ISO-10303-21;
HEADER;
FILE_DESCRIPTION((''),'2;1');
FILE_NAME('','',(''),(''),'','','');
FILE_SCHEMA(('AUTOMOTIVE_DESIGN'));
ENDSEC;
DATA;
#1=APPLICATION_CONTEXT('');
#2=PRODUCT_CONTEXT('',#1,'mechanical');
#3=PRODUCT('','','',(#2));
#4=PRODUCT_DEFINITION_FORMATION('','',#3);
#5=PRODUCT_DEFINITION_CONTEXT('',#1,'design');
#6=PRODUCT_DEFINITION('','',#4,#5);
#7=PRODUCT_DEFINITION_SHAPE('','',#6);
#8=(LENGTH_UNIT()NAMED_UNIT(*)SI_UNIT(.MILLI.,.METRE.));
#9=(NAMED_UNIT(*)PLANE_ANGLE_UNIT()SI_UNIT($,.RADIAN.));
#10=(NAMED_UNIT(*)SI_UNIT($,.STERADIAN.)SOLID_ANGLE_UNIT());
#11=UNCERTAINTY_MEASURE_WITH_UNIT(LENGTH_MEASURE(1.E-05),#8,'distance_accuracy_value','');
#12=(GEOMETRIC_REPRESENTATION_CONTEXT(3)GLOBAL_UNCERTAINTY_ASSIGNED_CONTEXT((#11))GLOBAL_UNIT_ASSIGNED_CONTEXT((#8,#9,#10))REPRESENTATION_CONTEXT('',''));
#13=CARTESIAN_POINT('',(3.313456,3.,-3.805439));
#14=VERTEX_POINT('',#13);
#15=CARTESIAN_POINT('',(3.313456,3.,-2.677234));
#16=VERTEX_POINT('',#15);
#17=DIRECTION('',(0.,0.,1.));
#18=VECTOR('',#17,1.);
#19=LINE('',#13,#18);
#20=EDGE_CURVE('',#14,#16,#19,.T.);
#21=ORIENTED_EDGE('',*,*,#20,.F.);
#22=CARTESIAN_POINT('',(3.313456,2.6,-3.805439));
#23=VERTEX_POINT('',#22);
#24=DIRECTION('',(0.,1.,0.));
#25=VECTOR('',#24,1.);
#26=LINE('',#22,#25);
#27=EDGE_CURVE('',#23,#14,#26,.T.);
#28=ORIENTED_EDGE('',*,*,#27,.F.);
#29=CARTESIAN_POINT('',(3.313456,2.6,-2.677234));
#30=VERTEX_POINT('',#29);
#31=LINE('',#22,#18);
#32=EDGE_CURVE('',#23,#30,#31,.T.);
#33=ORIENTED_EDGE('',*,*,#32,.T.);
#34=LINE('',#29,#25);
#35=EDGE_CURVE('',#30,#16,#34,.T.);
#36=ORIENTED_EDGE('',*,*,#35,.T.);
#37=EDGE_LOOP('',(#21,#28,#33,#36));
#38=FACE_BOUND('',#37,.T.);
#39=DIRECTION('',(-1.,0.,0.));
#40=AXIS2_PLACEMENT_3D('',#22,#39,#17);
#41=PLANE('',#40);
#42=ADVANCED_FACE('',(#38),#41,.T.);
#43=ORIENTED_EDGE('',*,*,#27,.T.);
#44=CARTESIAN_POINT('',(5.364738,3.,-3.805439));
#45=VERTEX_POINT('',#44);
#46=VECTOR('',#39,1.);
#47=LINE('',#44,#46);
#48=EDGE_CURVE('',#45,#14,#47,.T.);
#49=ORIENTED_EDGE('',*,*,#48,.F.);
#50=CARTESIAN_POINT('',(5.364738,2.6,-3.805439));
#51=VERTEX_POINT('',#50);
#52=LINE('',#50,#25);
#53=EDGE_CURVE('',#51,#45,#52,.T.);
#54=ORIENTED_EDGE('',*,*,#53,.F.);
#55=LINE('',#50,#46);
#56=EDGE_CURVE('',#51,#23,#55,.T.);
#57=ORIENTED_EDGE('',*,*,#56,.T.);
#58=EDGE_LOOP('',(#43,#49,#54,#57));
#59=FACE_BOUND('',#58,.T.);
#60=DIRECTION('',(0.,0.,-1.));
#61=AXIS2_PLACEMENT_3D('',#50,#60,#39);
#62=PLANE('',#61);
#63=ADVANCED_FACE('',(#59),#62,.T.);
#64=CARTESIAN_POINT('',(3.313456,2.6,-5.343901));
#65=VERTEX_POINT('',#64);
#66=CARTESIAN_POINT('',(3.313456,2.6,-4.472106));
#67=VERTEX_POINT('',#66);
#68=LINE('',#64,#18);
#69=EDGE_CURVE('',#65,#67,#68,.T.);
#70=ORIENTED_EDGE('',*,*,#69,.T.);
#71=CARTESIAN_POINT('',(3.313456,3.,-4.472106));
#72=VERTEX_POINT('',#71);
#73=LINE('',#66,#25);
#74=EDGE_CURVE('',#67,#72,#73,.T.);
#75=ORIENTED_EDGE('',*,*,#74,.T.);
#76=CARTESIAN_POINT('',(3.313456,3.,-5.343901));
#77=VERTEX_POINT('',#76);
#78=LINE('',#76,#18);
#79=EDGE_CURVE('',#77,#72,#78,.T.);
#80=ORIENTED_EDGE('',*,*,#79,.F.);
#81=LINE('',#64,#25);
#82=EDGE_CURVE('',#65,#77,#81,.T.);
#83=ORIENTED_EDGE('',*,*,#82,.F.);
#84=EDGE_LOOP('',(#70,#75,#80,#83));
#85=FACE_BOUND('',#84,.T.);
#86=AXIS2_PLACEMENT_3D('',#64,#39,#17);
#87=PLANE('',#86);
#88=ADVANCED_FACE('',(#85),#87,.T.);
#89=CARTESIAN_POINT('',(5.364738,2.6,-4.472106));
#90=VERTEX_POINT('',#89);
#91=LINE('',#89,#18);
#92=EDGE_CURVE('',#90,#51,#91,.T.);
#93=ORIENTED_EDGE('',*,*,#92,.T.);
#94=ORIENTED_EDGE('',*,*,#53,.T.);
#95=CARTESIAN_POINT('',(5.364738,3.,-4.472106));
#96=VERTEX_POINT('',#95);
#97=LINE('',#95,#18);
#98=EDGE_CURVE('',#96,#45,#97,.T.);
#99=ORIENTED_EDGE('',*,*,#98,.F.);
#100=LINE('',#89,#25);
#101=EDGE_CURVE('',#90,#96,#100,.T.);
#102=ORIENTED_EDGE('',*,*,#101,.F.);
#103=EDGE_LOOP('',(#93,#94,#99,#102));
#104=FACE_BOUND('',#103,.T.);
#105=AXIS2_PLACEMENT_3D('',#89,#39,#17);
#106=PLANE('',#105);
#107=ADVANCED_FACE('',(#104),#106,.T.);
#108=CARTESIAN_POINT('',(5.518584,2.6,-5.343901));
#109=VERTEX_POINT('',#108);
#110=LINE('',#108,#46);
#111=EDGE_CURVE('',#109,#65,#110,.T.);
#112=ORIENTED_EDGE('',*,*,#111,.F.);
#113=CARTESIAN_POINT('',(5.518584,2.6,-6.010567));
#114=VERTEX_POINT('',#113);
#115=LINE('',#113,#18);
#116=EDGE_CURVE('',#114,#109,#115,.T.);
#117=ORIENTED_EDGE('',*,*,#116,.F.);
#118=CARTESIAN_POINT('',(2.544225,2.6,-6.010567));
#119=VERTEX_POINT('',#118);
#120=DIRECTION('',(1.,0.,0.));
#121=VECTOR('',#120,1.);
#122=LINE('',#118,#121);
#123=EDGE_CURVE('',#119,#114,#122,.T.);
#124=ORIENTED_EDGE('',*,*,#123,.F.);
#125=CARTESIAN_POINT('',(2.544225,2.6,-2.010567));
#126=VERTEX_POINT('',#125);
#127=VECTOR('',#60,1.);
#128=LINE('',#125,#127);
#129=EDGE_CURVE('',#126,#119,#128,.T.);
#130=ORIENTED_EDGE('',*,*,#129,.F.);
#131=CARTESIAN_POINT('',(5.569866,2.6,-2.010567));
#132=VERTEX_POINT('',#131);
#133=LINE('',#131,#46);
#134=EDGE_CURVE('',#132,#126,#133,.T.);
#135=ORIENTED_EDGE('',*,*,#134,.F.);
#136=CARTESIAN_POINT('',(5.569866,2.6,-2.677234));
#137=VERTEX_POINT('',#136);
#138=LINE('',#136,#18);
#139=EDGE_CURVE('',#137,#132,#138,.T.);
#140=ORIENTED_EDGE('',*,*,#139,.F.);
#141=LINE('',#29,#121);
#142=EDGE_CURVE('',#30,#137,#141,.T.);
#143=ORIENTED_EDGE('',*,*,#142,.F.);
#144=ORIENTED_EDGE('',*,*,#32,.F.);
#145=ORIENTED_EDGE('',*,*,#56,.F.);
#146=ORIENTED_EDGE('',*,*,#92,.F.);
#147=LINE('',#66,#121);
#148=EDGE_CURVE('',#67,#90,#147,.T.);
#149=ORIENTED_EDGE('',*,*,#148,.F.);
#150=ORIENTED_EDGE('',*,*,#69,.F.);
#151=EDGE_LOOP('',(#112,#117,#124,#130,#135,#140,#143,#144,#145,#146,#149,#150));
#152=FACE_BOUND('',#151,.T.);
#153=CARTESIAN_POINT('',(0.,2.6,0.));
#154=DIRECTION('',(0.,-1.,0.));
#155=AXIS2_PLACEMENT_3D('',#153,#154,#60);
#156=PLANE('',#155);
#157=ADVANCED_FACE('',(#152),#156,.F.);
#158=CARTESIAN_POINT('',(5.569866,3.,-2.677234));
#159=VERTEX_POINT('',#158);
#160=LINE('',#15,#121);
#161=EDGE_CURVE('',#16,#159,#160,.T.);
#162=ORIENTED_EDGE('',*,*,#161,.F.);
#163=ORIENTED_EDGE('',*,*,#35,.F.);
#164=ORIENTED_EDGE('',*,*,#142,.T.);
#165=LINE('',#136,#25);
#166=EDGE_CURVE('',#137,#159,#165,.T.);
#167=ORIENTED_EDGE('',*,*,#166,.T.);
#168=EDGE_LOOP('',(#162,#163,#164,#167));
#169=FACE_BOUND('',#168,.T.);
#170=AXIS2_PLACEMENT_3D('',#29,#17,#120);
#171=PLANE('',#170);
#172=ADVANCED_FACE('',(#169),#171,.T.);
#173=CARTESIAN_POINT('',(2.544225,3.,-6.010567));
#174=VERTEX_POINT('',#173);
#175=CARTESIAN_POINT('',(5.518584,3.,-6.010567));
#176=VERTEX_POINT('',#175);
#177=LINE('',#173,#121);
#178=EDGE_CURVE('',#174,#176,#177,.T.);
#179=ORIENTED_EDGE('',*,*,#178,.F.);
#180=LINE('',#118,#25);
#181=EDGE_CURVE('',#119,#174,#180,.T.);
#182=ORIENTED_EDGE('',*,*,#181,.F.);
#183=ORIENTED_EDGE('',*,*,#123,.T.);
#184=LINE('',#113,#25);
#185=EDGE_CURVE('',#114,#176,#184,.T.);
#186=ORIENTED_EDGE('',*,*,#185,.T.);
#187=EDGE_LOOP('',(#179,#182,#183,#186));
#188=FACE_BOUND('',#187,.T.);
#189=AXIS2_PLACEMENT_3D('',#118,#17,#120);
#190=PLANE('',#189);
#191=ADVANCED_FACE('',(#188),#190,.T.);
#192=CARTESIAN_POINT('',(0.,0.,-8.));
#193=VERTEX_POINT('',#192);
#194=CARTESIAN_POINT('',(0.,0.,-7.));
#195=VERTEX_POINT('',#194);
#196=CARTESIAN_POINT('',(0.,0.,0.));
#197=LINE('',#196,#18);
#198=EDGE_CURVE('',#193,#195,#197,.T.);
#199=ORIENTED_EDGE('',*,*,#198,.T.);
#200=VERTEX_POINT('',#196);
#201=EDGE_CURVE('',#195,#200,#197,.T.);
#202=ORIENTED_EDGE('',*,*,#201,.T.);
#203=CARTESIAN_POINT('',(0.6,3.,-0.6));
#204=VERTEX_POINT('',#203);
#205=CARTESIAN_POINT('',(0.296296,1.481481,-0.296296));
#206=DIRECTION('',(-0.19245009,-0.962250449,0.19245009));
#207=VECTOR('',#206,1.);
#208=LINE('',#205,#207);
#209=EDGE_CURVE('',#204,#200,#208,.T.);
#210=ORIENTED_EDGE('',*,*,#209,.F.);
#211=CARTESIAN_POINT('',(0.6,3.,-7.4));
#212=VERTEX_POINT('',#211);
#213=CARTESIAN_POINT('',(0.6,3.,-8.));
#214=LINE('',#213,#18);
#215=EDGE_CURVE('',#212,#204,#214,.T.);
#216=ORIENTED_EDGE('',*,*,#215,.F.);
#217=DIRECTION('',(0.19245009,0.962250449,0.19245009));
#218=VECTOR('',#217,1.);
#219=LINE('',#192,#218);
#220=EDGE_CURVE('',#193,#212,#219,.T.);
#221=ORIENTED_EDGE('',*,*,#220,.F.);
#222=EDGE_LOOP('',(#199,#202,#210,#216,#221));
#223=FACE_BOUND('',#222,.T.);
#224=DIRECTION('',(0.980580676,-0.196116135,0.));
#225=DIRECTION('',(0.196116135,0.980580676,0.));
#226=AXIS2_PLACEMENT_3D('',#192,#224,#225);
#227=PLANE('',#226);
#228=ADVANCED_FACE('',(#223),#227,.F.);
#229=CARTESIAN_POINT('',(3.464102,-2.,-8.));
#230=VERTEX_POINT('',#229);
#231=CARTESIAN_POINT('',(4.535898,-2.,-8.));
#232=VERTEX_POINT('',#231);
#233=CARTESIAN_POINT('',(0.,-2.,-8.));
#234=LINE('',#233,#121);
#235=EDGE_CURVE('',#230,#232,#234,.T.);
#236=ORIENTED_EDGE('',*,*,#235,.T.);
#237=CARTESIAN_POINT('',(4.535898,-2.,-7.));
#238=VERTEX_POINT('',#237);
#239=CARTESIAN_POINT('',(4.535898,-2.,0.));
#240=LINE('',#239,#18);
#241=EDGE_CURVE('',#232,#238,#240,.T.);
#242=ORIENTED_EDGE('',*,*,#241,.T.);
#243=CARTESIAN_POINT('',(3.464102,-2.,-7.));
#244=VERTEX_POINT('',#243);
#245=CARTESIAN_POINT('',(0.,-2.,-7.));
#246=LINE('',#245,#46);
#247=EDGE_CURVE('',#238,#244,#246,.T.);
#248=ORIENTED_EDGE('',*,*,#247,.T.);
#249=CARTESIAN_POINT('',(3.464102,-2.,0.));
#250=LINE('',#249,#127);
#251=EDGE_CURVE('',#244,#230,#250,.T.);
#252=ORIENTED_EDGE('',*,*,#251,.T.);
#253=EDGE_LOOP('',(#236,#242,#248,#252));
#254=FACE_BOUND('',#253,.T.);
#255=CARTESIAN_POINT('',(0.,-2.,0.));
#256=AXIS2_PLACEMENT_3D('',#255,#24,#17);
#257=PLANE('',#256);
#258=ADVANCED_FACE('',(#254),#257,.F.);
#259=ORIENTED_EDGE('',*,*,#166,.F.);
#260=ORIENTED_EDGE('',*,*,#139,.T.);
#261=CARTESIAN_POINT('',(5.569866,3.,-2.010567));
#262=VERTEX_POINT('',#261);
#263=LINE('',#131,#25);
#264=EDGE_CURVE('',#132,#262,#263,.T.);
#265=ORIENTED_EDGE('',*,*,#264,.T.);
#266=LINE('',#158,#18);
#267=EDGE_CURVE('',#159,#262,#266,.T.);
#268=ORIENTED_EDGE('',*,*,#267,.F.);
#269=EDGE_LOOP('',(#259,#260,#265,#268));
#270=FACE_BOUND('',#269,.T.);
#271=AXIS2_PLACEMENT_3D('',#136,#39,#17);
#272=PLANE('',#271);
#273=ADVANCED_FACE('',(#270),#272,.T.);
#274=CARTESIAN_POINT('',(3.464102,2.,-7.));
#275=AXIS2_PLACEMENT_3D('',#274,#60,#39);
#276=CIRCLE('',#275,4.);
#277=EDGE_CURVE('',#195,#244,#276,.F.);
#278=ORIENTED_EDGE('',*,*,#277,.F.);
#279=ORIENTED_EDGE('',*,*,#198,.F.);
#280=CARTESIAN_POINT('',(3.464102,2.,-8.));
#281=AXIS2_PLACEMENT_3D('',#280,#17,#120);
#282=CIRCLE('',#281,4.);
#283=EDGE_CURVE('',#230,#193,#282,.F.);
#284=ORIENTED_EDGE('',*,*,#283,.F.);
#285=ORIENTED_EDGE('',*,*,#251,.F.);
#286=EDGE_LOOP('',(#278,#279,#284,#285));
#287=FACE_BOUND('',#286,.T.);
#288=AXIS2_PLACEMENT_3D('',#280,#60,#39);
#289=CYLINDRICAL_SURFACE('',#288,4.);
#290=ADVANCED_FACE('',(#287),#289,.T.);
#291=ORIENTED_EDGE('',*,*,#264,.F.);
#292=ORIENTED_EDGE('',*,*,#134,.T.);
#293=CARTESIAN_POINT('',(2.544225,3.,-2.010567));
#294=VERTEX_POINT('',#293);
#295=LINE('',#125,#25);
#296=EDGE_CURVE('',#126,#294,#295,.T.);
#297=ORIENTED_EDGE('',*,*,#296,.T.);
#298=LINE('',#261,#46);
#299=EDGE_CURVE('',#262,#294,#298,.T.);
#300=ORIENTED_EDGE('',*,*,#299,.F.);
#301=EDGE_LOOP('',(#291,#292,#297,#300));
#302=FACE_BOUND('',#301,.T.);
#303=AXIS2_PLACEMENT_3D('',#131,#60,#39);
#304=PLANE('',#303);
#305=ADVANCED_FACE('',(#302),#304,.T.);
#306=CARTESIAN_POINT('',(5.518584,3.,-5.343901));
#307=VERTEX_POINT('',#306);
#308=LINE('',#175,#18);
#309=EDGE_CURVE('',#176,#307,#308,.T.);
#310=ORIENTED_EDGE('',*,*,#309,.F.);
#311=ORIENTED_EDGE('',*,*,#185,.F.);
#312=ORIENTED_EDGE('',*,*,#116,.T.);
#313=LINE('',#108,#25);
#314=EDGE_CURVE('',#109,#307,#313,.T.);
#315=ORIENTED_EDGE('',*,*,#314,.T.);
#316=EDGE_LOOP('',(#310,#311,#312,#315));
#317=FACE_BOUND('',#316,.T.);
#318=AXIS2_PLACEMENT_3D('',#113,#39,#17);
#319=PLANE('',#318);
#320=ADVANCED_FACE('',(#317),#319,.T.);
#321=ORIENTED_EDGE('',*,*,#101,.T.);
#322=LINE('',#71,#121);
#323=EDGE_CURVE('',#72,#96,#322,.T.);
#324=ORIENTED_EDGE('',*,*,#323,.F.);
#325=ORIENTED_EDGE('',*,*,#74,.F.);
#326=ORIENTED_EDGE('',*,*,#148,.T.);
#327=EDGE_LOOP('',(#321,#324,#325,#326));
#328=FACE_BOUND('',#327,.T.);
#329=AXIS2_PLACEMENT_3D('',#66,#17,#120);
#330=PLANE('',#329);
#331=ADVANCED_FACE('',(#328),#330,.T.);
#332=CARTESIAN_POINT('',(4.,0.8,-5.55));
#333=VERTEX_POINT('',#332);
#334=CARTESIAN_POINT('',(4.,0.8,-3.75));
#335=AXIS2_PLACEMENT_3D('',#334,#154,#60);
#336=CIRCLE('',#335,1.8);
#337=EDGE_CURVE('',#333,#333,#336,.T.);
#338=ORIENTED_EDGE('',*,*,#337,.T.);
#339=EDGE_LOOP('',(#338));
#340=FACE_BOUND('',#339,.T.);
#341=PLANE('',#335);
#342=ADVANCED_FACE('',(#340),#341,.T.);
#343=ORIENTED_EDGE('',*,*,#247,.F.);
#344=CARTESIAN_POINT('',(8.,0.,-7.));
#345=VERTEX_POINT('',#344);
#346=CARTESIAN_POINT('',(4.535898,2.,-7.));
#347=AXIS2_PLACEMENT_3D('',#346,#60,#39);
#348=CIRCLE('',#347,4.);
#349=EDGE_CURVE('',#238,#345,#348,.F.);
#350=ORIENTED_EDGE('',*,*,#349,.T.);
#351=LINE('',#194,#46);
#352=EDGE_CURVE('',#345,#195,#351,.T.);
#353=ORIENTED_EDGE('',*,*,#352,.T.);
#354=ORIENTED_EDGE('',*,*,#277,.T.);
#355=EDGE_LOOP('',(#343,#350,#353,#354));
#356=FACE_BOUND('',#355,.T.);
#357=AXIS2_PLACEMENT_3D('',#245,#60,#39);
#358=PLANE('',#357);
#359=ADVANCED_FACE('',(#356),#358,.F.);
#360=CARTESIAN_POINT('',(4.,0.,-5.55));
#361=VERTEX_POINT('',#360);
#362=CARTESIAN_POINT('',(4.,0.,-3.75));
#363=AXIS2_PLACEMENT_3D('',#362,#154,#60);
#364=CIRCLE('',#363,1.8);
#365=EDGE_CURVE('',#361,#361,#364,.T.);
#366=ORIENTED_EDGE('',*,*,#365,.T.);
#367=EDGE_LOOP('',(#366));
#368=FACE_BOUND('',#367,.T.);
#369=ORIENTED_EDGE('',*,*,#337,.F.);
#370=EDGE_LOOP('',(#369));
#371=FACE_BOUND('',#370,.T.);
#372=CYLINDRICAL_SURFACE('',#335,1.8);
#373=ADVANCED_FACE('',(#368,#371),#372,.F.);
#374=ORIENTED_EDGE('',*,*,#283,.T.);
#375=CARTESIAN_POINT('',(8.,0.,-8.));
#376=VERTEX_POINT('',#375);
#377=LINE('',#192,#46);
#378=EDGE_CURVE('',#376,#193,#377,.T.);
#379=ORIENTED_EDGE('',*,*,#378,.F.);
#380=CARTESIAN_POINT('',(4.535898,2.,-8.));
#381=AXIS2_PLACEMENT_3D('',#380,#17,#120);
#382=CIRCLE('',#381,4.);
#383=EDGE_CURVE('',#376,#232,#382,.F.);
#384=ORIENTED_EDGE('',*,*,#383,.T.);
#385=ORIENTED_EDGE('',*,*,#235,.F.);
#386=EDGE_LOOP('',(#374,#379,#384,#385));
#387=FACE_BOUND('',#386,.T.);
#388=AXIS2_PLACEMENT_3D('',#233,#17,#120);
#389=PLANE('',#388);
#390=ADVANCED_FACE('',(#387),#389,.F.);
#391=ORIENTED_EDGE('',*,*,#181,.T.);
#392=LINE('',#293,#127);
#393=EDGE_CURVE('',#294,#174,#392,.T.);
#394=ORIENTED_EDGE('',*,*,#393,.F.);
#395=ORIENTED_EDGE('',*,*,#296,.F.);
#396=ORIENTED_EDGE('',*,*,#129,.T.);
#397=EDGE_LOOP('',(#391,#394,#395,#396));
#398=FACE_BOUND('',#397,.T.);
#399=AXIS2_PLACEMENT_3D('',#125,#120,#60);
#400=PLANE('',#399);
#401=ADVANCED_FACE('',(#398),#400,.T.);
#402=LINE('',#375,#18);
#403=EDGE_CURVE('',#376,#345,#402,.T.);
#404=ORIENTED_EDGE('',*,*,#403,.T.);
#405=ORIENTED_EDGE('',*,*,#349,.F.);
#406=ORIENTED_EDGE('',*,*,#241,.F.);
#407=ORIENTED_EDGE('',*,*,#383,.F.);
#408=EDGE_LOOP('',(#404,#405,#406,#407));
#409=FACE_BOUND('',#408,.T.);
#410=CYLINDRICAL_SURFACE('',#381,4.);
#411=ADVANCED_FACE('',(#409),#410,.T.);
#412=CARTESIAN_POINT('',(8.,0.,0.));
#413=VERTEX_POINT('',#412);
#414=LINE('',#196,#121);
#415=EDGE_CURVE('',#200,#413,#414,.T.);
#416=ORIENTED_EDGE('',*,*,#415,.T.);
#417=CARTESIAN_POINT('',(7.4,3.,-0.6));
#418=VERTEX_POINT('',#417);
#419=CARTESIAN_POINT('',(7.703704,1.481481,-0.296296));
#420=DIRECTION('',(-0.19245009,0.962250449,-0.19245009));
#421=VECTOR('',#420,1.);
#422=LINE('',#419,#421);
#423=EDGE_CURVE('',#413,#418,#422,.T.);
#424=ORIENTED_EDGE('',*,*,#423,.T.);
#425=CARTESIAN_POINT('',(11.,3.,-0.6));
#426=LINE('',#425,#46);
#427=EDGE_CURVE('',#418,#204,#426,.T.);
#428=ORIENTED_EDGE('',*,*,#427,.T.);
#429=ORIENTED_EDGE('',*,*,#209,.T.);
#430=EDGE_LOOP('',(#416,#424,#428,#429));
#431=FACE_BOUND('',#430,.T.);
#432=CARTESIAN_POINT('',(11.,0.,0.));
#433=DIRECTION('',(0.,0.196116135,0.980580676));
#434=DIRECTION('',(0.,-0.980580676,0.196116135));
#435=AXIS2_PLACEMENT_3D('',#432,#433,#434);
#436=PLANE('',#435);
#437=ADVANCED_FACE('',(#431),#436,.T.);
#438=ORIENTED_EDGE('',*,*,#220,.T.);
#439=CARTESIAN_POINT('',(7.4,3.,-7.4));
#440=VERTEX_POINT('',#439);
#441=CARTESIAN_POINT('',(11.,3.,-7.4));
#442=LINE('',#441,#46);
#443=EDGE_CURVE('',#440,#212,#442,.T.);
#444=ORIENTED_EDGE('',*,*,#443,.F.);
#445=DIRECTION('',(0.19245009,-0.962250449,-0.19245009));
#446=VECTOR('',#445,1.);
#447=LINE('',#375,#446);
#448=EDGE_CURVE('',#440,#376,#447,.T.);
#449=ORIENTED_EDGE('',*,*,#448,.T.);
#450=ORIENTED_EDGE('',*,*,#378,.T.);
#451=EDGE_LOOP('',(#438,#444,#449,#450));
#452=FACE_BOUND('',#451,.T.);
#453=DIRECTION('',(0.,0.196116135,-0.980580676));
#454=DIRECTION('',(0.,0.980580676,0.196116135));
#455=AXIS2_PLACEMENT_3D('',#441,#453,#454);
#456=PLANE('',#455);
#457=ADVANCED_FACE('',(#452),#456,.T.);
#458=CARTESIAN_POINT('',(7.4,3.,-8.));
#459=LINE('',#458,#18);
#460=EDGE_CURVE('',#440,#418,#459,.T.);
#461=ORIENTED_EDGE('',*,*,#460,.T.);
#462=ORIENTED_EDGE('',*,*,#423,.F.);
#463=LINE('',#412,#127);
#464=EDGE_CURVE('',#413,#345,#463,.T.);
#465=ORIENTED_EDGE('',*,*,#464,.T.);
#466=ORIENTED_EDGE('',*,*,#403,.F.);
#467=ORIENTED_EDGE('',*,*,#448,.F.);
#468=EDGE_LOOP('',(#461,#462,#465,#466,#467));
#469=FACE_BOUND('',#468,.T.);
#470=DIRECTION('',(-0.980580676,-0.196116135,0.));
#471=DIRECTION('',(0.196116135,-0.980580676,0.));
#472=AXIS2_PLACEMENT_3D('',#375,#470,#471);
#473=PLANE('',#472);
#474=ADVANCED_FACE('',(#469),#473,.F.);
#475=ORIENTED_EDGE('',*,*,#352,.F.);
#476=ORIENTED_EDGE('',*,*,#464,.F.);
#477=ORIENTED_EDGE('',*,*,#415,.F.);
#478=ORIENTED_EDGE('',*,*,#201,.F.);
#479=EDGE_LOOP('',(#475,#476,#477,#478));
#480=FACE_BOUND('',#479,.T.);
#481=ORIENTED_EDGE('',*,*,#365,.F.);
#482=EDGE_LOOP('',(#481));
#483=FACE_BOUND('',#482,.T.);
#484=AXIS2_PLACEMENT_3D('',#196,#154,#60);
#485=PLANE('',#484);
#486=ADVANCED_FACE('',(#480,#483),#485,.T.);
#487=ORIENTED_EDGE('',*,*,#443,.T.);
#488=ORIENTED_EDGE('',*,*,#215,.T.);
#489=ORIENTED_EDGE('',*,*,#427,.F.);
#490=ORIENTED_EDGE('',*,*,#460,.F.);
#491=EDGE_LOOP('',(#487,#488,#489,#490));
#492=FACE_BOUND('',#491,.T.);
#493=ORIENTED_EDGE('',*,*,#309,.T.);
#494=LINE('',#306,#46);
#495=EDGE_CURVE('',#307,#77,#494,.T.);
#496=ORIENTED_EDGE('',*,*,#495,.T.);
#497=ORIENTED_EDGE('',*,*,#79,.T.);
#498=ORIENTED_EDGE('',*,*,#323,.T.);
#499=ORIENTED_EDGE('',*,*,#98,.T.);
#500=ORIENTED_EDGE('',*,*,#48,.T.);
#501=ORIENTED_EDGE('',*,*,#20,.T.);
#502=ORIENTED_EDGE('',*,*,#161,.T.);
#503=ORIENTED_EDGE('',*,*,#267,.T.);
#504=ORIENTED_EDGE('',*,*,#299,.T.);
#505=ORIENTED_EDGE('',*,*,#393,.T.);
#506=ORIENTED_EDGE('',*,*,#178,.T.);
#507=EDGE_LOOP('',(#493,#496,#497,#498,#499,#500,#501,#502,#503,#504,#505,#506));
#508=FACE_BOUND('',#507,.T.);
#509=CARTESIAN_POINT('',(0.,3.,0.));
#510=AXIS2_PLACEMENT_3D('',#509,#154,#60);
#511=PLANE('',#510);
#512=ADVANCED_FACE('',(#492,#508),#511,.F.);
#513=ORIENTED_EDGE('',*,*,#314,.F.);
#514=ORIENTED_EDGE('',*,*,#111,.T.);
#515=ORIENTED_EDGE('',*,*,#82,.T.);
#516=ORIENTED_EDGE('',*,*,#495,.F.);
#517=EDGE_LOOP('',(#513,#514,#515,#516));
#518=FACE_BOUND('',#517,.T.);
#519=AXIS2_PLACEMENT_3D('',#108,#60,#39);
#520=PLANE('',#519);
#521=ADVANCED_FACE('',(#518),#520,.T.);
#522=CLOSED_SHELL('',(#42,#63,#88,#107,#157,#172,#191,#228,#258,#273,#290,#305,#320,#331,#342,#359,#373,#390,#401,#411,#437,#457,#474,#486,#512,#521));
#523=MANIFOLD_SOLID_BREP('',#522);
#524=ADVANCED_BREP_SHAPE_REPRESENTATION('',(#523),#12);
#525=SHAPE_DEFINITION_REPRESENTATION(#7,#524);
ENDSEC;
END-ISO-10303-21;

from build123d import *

# Parameters (mm, degrees)
SKETCH1_W               = 8
SKETCH1_H               = 8
BOSS_EXTRUDE1_DEPTH     = 3
CUT_EXTRUDE1_DEPTH      = 12.704699911
CUT_EXTRUDE1_DEPTH_BACK = 12.704699911
CUT_EXTRUDE2_DEPTH      = 11
SKETCH4_R               = 1.8
CUT_EXTRUDE3_DEPTH      = 0.8
SKETCH5_W               = 8
SKETCH5_H               = 1
BOSS_EXTRUDE2_DEPTH     = 2
FILLET1_R               = 4
CUT_EXTRUDE4_DEPTH      = 0.4


with BuildPart() as part:
    # Sketch1 → Boss-Extrude1 (new body)
    with BuildSketch(Plane(origin=(0, 0, 0), x_dir=(1, 0, 0), z_dir=(0, 1, 0))):
        with Locations((4, 4)):
            Rectangle(SKETCH1_W, SKETCH1_H)
    extrude(amount=BOSS_EXTRUDE1_DEPTH)

    # Sketch2 → Cut-Extrude1 (cut, two sides: drawn at the far end of the back side and taken through both)
    with BuildSketch(Plane.XY.offset(-CUT_EXTRUDE1_DEPTH_BACK)):
        Polygon((0, 0), (0.6, 3), (0, 3), align=None)
        Polygon((8, 0), (7.4, 3), (8, 3), align=None)
    extrude(amount=CUT_EXTRUDE1_DEPTH + CUT_EXTRUDE1_DEPTH_BACK, mode=Mode.SUBTRACT)

    # Sketch3 → Cut-Extrude2 (cut)
    with BuildSketch(Plane(origin=(0, 0, 0), x_dir=(0, 0, -1), z_dir=(1, 0, 0))):
        Polygon((0, 0), (0.6, 3), (0, 3), align=None)
        Polygon((8, 3), (7.4, 3), (8, 0), align=None)
    extrude(amount=CUT_EXTRUDE2_DEPTH, mode=Mode.SUBTRACT)

    # Sketch4 → Cut-Extrude3 (cut)
    with BuildSketch(Plane.XZ):
        with Locations(Location((4, -3.75, 0), (0, 0, 270))):
            Circle(SKETCH4_R)
    extrude(amount=-CUT_EXTRUDE3_DEPTH, mode=Mode.SUBTRACT)

    # Sketch5 → Boss-Extrude2 (add)
    with BuildSketch(Plane.XZ):
        with Locations((4, -7.5)):
            Rectangle(SKETCH5_W, SKETCH5_H)
    extrude(amount=BOSS_EXTRUDE2_DEPTH)

    # Fillet1
    # the kernel refuses this fillet: 4 mm, written as the material it takes off along each edge
    with BuildSketch(Plane(origin=(8, -2, -16.660254038), x_dir=(0, 1, 0), z_dir=(0, 0, 1)), Plane(origin=(0, -2, 1.660254038), x_dir=(0, 1, 0), z_dir=(0, 0, -1))) as fillet1_piece_1:
        with BuildLine():
            CenterArc((4, 3.464101615), FILLET1_R, 180, 60)
            Line((0, 3.464101615), (-0.08, 3.464101615))
            Line((-0.08, 3.464101615), (-0.08, 0))
            Line((-0.08, 0), (0, -0.08))
            ThreePointArc((0, -0.08), (1, -0.08), (1.96, -0.069282032))
            Line((1.96, -0.069282032), (2, 0))
        make_face()
    extrude(amount=18.320508076, mode=Mode.SUBTRACT)

    # Sketch6 → Cut-Extrude4 (cut)
    with BuildSketch(Plane(origin=(0, 3, 0), x_dir=(1, 0, 0), z_dir=(0, 1, 0))):
        Polygon((2.544225106, 2.010567225), (2.544225106, 6.010567225), (5.51858408, 6.010567225), (5.51858408, 5.343900558), (3.313455875, 5.343900558), (3.313455875, 4.472105686), (5.364737926, 4.472105686), (5.364737926, 3.80543902), (3.313455875, 3.80543902), (3.313455875, 2.677233891), (5.569866131, 2.677233891), (5.569866131, 2.010567225), align=None)
    extrude(amount=-CUT_EXTRUDE4_DEPTH, mode=Mode.SUBTRACT)


solid = part.part
